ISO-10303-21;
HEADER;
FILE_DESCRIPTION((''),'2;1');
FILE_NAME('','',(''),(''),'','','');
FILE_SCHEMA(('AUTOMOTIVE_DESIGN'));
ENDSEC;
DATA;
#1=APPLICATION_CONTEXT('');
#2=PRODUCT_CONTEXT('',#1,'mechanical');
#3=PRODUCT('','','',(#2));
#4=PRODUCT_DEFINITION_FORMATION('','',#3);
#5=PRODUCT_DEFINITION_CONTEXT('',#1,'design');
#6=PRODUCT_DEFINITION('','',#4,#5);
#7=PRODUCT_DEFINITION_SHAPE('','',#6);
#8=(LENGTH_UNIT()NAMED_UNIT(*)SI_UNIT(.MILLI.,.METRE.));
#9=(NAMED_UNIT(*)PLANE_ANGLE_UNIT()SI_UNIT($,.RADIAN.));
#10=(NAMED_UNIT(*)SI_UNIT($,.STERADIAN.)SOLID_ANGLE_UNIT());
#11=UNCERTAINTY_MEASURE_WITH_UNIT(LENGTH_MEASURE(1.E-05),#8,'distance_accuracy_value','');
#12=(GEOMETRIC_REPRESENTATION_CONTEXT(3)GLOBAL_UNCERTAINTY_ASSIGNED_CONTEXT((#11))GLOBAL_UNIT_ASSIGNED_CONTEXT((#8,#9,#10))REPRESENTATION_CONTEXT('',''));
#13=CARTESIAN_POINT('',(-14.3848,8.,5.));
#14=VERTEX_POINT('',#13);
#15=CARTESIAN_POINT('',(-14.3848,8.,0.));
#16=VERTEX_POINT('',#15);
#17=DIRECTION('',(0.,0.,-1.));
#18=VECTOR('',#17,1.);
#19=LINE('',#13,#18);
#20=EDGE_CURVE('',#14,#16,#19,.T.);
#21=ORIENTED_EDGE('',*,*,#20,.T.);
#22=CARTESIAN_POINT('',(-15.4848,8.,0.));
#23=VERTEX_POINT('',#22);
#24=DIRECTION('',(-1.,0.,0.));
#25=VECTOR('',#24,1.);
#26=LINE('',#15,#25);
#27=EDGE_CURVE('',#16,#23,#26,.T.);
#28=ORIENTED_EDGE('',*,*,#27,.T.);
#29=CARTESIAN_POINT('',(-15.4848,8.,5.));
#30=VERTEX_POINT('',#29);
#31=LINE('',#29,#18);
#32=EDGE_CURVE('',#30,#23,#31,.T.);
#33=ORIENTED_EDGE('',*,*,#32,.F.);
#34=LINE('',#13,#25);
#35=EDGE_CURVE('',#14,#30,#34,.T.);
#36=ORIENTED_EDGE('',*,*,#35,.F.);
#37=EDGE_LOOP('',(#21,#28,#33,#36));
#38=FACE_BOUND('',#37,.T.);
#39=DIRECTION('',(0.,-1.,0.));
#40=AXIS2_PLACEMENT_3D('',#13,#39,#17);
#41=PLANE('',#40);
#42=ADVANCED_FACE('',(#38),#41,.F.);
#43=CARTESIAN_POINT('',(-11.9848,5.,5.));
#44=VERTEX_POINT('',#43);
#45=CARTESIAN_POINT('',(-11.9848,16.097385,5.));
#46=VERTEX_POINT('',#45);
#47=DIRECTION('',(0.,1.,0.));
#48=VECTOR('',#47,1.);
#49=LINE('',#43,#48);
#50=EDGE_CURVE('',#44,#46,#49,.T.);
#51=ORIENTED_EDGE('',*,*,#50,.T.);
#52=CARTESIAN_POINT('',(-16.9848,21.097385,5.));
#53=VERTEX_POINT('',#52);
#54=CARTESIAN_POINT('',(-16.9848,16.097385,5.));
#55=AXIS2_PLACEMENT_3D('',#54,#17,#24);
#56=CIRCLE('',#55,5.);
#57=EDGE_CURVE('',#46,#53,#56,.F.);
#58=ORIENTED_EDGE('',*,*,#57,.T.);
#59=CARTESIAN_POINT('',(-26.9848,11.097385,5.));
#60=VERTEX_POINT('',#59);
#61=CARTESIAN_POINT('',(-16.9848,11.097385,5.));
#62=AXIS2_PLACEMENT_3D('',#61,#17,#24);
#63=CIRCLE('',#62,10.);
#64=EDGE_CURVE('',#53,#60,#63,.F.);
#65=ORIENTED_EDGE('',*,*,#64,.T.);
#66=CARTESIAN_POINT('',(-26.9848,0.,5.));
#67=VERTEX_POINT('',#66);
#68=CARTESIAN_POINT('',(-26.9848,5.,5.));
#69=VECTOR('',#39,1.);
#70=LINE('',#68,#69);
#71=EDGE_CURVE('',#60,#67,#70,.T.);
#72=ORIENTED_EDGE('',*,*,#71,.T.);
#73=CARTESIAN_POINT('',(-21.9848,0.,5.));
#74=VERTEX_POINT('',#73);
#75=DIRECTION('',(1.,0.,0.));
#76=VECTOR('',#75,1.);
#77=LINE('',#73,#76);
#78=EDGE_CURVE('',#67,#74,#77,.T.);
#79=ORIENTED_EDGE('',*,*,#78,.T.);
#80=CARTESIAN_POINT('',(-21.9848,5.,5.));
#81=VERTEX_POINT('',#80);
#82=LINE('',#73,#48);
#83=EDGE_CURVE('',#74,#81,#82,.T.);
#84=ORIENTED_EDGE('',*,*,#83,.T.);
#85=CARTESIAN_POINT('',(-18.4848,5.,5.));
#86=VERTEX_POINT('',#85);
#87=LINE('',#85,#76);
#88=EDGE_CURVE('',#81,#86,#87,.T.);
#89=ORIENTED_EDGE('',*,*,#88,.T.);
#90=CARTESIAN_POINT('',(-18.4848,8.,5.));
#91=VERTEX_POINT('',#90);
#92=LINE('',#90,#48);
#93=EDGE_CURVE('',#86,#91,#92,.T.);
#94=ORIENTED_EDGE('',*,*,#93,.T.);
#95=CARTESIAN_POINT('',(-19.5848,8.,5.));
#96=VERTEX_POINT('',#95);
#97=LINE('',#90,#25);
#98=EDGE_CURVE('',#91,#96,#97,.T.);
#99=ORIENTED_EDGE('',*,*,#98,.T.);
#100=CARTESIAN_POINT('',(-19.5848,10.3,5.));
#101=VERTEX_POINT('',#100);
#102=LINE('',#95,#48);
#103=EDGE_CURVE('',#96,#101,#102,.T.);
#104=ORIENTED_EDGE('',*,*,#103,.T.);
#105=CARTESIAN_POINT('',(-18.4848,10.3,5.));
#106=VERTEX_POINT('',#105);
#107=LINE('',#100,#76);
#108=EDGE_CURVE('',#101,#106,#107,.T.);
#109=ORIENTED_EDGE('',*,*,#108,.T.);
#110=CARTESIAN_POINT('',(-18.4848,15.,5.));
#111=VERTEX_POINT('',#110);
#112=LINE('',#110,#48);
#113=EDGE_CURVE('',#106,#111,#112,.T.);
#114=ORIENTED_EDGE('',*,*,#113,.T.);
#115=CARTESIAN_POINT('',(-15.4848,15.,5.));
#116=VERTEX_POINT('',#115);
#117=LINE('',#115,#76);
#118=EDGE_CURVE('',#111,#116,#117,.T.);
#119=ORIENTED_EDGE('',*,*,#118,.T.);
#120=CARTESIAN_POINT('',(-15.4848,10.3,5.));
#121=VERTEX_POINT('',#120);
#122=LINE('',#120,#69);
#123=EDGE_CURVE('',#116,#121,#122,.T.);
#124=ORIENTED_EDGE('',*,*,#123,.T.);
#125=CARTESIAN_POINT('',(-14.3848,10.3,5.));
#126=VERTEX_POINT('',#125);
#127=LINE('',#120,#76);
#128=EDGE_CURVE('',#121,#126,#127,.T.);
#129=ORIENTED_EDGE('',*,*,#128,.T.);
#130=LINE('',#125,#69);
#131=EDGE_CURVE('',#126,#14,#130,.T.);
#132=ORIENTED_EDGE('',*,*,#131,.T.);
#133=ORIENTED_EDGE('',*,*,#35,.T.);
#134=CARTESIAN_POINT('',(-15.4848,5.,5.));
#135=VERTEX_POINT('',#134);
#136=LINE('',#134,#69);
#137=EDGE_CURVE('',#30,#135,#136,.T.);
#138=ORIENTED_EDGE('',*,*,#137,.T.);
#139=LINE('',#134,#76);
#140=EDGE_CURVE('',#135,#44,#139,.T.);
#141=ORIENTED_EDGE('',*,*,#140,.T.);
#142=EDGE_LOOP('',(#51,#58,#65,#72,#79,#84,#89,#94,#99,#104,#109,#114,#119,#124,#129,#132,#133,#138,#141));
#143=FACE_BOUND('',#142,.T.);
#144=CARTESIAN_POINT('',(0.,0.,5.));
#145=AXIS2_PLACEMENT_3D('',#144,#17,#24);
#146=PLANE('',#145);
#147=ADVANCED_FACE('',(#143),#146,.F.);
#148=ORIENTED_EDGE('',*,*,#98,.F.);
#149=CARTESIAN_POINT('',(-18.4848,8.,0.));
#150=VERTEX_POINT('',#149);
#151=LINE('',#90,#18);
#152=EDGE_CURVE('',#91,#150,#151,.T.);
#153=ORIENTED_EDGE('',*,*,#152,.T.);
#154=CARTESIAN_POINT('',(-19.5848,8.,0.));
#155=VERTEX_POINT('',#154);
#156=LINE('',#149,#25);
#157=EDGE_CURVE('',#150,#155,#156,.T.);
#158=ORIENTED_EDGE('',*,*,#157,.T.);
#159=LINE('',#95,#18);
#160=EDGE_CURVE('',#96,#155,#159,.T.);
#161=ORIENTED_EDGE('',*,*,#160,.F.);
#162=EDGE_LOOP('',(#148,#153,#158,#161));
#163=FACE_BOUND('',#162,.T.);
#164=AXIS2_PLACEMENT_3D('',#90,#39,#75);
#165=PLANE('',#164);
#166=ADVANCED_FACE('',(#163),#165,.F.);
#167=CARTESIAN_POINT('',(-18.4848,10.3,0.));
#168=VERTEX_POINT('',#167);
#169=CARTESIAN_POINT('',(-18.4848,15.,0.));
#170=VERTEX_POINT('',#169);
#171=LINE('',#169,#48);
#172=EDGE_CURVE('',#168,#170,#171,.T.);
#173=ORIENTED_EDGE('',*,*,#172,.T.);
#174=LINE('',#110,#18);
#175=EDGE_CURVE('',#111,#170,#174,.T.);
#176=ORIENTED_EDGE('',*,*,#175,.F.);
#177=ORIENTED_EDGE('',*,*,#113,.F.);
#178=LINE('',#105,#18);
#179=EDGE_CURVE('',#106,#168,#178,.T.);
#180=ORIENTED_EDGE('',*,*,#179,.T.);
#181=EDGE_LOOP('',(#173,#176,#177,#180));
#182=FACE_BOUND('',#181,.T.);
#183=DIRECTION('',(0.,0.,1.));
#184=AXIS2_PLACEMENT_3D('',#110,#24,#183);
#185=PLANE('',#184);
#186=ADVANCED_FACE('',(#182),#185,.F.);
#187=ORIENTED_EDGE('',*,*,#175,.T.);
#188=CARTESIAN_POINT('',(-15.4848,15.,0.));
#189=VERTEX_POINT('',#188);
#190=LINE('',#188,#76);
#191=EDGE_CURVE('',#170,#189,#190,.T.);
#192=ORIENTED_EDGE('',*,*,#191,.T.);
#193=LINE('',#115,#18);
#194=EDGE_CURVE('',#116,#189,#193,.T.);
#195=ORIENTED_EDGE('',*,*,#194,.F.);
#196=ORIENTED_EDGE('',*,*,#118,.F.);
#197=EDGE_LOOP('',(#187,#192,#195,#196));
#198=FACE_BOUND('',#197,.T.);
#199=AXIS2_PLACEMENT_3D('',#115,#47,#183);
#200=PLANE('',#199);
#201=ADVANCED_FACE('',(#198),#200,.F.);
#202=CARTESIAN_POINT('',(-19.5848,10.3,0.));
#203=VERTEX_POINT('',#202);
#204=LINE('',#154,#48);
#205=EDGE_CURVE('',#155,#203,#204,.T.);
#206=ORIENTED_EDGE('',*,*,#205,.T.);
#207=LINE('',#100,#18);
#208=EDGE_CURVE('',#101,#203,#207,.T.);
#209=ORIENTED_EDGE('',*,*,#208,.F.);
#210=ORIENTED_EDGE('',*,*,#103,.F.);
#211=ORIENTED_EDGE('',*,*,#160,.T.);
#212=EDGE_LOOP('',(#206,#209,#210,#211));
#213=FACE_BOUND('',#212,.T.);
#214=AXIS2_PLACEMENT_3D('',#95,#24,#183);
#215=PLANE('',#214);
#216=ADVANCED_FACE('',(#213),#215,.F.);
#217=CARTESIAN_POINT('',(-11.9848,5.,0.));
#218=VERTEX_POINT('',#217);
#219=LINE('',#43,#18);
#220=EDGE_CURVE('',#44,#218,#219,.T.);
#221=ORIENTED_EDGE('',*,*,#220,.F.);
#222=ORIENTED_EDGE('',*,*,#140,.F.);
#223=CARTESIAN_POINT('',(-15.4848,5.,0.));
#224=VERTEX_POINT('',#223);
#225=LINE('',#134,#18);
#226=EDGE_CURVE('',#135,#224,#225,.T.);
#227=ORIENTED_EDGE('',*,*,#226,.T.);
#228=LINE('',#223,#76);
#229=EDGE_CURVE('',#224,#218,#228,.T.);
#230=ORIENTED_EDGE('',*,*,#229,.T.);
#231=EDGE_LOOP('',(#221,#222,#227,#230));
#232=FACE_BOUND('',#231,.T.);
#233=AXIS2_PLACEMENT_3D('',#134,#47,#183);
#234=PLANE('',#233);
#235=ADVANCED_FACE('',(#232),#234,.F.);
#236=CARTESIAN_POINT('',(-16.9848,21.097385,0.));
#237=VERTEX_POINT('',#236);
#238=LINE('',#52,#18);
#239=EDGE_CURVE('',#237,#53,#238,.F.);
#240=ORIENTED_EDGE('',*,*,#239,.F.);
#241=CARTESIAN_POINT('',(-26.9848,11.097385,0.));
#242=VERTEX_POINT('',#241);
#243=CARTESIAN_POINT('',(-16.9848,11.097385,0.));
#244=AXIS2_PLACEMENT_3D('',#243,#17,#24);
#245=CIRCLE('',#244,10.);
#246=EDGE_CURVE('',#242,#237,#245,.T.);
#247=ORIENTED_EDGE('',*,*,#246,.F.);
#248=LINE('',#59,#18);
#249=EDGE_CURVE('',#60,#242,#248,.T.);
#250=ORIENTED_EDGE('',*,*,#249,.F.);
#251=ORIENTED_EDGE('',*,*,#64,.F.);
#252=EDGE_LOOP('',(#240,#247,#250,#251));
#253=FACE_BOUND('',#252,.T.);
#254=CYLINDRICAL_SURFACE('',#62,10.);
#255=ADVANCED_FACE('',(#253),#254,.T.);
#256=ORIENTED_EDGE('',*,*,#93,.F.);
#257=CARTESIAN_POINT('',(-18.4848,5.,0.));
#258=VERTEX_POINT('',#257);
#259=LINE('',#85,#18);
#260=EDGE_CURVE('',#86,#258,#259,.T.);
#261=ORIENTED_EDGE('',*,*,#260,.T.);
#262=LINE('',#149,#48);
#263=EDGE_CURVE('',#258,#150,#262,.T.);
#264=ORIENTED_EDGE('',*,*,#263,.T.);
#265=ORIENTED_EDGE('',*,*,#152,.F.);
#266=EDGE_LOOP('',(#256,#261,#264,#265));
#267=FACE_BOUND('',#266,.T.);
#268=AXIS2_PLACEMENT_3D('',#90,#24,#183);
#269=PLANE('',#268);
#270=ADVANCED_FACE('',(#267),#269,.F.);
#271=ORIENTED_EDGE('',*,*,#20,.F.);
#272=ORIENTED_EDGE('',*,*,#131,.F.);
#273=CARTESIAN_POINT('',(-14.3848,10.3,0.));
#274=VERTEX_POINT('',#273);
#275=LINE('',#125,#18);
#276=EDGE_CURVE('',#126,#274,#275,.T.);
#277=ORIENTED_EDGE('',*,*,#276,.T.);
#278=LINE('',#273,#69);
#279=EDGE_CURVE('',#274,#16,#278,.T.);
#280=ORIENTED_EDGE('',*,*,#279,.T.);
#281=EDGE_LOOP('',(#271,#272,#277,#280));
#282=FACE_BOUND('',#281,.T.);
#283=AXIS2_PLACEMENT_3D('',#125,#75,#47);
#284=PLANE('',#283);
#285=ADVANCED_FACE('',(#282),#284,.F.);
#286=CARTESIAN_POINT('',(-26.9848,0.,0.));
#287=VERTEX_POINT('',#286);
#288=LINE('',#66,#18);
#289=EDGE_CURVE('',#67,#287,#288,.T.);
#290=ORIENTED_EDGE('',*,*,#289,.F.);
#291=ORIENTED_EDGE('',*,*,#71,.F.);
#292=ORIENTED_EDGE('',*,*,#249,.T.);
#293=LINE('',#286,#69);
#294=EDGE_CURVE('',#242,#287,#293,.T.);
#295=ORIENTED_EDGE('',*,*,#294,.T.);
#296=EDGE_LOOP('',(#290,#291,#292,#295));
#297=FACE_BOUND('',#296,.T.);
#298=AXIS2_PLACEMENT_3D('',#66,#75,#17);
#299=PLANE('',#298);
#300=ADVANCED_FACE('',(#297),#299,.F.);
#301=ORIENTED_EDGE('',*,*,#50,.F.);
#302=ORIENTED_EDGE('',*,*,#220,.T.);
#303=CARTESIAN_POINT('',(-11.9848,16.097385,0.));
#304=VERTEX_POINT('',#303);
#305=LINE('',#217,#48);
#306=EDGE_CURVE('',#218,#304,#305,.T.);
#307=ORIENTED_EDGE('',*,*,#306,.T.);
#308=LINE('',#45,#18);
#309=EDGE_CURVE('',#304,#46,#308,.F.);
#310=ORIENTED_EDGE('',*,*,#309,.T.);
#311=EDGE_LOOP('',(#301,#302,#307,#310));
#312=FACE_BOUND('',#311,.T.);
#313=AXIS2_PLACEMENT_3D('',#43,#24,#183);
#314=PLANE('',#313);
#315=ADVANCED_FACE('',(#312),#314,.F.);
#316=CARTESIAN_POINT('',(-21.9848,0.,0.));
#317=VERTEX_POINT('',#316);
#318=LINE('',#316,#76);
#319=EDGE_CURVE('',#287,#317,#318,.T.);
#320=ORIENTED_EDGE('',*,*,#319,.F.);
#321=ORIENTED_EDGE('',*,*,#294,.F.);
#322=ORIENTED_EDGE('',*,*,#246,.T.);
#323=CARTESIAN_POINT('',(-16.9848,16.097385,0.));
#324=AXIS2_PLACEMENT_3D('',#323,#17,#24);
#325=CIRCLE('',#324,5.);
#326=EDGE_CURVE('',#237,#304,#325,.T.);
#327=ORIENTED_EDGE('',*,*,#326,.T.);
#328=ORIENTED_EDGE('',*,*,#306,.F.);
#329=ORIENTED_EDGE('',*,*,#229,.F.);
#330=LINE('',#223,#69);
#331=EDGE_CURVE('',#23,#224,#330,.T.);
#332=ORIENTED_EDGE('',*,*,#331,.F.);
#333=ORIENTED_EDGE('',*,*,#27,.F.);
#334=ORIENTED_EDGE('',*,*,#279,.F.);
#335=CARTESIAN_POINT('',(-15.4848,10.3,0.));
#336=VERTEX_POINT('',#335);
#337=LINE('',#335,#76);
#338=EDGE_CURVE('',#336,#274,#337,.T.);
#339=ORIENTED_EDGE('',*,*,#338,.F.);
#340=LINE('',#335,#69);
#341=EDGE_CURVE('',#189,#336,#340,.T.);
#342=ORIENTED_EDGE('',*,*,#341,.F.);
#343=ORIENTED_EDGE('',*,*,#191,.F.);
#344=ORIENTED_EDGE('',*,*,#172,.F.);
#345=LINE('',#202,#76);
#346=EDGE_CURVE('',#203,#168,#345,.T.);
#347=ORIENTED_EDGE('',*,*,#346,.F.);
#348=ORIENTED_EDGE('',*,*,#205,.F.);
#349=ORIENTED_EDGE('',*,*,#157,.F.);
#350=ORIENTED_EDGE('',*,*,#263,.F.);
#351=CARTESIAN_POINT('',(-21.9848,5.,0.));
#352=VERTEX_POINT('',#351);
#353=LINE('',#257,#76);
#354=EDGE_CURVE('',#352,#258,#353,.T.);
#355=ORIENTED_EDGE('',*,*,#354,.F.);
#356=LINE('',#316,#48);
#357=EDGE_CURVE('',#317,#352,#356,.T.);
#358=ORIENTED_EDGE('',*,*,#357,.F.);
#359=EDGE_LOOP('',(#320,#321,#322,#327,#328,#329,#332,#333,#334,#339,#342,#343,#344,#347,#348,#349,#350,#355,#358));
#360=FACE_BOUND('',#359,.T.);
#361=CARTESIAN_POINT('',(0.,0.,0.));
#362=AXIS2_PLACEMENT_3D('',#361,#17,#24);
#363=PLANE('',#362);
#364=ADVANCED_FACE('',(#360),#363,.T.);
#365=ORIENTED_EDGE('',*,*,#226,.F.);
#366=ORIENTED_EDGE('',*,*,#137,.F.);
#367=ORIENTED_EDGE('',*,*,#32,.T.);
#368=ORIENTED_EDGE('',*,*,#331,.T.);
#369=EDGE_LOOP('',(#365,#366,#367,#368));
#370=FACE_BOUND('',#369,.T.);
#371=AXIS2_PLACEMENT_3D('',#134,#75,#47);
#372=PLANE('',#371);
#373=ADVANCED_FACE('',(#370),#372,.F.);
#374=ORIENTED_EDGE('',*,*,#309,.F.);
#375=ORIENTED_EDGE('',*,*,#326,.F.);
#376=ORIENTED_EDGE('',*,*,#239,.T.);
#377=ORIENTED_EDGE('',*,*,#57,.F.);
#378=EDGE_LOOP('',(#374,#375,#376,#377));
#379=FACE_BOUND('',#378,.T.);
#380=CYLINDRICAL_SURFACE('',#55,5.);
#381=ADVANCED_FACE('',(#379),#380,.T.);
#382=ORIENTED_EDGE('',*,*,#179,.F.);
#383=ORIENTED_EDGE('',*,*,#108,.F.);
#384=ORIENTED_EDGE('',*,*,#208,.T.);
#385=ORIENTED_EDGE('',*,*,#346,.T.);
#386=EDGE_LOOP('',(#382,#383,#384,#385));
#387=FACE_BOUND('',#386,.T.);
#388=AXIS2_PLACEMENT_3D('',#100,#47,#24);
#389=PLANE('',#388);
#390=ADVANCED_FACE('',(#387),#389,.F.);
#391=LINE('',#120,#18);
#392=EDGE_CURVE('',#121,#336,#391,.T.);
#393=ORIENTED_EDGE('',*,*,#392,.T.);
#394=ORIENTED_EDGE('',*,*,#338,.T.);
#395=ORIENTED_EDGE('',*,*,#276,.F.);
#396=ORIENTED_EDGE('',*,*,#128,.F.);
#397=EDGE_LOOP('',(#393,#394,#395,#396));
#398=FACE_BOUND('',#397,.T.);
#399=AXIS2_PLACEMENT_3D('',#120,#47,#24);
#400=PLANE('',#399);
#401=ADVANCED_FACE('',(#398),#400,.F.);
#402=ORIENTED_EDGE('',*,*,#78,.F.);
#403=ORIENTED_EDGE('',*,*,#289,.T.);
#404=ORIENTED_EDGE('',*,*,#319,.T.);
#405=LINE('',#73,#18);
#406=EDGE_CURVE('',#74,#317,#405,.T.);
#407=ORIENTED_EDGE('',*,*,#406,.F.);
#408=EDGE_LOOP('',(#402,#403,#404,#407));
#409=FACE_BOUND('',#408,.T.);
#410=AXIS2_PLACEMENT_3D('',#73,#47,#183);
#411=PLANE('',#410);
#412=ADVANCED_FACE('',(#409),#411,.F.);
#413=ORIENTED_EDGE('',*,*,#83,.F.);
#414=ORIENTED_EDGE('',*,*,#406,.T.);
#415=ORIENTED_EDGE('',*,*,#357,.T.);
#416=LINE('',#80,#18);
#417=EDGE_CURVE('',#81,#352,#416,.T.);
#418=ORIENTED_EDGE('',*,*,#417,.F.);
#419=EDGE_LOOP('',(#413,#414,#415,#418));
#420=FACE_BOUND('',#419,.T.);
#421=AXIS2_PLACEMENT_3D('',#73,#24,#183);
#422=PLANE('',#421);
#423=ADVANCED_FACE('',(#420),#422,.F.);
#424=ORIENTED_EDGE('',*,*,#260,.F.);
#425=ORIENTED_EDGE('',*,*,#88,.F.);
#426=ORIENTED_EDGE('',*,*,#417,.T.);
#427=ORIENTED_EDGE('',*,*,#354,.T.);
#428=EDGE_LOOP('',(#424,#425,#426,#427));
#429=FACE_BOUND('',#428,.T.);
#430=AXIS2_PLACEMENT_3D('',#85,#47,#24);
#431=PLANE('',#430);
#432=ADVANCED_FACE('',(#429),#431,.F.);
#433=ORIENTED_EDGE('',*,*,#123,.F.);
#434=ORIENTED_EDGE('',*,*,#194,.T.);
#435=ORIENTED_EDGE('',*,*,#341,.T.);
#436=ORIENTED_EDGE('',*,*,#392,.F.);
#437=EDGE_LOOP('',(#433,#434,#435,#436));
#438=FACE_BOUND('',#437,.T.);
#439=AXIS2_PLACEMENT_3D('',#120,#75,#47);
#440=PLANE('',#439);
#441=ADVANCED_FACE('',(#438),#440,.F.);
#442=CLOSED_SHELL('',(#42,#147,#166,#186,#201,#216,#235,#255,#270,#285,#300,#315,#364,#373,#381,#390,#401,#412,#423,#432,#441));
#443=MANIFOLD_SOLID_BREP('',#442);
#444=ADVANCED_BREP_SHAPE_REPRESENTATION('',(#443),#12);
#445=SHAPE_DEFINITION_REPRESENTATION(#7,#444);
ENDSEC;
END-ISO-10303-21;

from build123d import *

# Parameters (mm, degrees)
BOSS_EXTRUDE1_DEPTH = 5
FILLET1_R           = 10
FILLET2_R           = 5


with BuildPart() as part:
    # Sketch1 → Boss-Extrude1 (new body)
    with BuildSketch(Plane.XY):
        Polygon((-18.484799863, 5), (-21.984799863, 5), (-21.984799863, 0), (-26.984799863, 0), (-26.984799863, 5), (-26.984799863, 21.097384909), (-11.984799863, 21.097384909), (-11.984799863, 5), (-15.484799863, 5), (-15.484799863, 8), (-14.384799863, 8), (-14.384799863, 10.3), (-15.484799863, 10.3), (-15.484799863, 15), (-18.484799863, 15), (-18.484799863, 10.3), (-19.584799863, 10.3), (-19.584799863, 8), (-18.484799863, 8), align=None)
    extrude(amount=BOSS_EXTRUDE1_DEPTH)

    # Fillet1
    fillet1_edges = [part.edges().sort_by_distance(p)[0] for p in [
        (-26.984799863, 21.097384909, 2.5),
    ]]
    fillet(fillet1_edges, radius=FILLET1_R)

    # Fillet2
    fillet2_edges = [part.edges().sort_by_distance(p)[0] for p in [
        (-11.984799863, 21.097384909, 2.5),
    ]]
    fillet(fillet2_edges, radius=FILLET2_R - 0.0001)  # a hair under: the kernel refuses the full size


solid = part.part
